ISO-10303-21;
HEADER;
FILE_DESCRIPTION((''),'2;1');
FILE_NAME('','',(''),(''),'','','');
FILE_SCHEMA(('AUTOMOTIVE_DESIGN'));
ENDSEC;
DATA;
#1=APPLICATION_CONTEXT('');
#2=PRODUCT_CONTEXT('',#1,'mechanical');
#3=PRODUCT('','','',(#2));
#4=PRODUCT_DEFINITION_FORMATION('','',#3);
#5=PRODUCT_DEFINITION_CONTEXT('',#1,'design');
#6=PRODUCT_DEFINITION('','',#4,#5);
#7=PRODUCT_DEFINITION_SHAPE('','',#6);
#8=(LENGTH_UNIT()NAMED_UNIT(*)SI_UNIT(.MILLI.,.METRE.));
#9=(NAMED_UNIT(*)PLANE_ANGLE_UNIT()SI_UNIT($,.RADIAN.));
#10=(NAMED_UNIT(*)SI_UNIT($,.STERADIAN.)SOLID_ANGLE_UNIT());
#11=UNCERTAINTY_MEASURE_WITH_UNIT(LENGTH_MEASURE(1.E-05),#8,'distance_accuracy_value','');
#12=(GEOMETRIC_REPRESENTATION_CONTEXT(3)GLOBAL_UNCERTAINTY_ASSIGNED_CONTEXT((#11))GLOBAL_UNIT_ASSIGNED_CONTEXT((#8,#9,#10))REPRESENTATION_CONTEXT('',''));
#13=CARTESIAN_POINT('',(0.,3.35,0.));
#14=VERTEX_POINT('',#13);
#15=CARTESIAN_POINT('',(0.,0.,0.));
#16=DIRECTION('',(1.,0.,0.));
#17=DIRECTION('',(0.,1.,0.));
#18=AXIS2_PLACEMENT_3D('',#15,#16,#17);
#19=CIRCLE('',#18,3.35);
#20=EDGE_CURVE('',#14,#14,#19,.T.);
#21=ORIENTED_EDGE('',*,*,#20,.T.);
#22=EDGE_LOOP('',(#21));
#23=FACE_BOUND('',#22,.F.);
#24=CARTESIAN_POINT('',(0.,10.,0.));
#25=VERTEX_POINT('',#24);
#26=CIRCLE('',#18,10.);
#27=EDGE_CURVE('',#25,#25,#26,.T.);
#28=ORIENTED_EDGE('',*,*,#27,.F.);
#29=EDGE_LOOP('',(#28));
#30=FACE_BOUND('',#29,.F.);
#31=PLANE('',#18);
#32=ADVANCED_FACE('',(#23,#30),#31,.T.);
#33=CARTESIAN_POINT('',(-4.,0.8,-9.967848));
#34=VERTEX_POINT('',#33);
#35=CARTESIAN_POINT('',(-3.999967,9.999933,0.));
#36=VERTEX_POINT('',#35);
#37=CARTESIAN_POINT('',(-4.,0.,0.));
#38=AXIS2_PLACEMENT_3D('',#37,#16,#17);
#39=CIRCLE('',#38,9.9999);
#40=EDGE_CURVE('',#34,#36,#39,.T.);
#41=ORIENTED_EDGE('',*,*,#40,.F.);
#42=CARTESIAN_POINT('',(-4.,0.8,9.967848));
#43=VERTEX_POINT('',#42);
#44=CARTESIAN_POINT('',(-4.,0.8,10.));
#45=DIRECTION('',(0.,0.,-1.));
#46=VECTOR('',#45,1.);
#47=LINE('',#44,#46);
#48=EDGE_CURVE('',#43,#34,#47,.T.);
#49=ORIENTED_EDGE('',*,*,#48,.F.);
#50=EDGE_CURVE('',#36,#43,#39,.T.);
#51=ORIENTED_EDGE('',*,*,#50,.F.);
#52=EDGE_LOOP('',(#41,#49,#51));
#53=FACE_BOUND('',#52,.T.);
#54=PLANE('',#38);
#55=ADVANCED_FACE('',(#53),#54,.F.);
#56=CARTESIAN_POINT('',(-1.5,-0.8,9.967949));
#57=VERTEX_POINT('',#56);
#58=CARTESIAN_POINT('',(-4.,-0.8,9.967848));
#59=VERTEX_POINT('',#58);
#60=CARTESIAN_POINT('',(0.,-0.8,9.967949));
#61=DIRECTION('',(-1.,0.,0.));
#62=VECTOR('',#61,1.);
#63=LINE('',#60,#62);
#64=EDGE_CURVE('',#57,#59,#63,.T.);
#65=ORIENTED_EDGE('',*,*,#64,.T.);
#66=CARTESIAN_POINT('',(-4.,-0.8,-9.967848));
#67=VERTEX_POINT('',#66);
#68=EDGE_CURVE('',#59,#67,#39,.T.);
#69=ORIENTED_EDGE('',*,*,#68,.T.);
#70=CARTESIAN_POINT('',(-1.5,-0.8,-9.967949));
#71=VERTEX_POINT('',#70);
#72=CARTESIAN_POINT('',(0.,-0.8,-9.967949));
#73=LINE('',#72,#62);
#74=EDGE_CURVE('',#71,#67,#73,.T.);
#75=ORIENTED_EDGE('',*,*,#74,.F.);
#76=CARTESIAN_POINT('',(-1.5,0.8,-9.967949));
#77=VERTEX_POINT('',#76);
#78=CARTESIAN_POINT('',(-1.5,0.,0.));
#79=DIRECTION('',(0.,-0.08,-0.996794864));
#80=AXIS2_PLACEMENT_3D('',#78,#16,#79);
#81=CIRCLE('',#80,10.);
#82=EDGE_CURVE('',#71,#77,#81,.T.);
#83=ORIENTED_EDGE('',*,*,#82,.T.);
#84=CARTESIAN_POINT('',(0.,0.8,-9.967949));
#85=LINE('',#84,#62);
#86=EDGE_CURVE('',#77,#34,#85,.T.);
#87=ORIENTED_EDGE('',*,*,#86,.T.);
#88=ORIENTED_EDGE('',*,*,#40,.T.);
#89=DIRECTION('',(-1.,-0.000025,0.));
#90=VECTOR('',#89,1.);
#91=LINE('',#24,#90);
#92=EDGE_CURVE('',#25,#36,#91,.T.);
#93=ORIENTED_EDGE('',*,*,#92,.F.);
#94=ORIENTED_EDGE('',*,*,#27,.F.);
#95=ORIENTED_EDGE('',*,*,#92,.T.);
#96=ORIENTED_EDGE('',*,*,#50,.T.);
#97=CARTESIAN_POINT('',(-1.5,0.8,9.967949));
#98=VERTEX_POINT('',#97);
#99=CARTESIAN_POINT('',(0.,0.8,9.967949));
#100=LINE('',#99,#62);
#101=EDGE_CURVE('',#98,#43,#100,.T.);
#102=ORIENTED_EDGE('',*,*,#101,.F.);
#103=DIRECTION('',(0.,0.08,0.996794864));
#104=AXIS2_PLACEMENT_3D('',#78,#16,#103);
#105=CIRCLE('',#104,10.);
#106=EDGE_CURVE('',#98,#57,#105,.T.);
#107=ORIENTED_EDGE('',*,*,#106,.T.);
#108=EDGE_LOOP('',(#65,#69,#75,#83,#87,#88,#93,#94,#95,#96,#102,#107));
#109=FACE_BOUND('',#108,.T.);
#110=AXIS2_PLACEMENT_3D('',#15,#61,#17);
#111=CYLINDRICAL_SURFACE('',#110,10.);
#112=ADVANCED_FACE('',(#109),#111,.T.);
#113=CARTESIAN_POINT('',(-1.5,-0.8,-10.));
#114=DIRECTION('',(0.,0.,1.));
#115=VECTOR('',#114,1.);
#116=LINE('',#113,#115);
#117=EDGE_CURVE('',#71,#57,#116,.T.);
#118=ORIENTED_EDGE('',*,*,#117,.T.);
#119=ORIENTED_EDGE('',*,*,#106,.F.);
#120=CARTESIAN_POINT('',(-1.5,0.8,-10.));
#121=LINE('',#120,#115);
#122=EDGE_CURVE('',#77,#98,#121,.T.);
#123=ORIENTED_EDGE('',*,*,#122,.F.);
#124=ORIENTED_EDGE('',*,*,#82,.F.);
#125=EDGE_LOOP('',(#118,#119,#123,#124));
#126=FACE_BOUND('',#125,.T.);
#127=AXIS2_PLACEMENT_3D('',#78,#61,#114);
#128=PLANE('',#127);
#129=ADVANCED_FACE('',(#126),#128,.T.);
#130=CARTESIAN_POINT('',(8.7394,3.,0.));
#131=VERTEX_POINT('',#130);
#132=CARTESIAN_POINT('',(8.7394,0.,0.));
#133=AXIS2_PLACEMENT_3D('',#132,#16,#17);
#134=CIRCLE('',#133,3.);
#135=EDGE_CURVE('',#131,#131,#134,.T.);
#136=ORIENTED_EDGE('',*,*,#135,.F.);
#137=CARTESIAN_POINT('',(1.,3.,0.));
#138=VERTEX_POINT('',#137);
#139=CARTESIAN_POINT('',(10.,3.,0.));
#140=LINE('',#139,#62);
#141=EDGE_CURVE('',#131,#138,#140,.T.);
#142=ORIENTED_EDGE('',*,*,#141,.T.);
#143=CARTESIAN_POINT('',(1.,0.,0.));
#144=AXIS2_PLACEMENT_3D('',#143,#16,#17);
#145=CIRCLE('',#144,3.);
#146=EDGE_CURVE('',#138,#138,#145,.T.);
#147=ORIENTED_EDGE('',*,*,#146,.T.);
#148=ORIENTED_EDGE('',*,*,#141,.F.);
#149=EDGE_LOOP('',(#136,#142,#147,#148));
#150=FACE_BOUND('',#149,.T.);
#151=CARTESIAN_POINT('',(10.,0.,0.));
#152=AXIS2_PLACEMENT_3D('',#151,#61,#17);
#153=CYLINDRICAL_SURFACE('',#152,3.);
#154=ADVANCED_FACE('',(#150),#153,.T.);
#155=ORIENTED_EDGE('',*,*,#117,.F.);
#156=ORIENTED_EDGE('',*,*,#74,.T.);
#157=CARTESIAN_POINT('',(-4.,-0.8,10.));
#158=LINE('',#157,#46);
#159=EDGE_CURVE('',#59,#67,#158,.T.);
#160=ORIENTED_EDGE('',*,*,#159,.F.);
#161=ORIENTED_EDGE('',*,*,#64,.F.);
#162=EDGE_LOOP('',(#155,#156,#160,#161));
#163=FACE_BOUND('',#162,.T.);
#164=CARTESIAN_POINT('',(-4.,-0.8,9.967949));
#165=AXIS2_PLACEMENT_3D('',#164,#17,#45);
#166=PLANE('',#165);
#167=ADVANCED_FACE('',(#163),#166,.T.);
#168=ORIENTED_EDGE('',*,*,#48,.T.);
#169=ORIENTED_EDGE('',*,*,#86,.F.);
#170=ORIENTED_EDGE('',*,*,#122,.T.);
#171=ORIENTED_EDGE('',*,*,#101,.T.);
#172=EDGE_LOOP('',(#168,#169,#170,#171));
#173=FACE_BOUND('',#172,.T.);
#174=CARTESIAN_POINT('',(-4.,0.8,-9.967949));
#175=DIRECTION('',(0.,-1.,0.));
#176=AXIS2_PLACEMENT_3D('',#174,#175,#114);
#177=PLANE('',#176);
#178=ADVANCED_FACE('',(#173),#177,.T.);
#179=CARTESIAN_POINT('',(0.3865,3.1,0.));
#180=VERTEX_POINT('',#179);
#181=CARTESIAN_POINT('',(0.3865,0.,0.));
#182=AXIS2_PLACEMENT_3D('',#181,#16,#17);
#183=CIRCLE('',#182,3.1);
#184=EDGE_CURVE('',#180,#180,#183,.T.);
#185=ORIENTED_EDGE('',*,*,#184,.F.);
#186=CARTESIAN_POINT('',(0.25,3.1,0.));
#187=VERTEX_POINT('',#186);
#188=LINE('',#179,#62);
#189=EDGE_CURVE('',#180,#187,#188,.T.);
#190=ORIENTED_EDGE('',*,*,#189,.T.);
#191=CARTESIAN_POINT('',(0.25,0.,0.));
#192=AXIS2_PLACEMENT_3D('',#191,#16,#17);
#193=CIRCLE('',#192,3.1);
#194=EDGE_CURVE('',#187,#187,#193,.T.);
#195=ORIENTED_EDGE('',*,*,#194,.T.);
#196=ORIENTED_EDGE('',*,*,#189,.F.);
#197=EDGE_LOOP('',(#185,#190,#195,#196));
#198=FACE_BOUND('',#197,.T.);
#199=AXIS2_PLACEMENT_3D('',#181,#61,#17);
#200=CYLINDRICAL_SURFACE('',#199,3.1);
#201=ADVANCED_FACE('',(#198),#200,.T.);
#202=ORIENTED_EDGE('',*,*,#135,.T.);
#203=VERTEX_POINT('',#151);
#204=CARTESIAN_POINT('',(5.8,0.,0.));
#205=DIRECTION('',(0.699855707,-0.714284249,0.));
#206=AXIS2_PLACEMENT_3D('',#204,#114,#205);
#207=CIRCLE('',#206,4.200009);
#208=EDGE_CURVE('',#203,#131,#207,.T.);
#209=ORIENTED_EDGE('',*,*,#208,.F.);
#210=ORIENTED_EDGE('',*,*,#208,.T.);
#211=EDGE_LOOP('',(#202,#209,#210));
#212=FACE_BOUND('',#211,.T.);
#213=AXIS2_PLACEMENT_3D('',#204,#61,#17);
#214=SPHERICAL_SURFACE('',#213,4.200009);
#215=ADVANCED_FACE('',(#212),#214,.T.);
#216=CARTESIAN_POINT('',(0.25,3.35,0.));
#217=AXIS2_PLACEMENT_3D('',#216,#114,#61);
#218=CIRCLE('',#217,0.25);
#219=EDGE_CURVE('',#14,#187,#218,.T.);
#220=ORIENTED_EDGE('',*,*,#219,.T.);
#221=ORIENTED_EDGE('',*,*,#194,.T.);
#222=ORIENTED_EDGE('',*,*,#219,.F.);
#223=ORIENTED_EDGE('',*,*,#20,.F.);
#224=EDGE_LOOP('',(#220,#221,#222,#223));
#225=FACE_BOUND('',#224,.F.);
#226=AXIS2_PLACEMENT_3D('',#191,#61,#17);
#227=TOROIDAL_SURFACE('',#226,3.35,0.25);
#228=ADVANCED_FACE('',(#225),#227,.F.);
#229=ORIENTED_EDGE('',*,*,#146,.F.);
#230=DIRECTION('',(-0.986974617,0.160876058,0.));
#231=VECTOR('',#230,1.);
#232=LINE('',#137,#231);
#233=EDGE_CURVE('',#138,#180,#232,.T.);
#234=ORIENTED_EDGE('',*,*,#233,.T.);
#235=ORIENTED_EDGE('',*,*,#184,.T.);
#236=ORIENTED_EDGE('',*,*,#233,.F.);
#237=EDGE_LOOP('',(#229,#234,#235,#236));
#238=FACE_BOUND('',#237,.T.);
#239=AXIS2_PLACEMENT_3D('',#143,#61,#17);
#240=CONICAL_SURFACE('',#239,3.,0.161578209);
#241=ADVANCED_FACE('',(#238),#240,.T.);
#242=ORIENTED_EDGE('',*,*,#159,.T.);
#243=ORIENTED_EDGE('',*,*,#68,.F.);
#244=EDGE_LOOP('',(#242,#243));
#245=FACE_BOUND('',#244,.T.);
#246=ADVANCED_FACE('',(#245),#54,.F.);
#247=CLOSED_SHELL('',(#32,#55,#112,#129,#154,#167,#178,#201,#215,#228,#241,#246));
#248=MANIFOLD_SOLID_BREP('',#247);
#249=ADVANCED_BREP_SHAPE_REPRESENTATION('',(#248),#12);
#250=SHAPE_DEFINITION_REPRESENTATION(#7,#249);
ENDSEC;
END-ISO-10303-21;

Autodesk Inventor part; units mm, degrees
ref_plane "YZ Plane" through (0, 0, 0) normal (1, 0, 0) x (0, 1, 0)
ref_plane "XZ Plane" through (0, 0, 0) normal (0, 1, 0) x (-1, 0, 0)
sketch "Sketch1" plane through (0, 0, 0) normal (0, 0, 1) x (1, 0, 0)
  line L0 (-4, 0) -> (10, 0)
  line L1 (10, 0) -> (10, 3)
  line L2 (10, 3) -> (1, 3)
  line L3 (1, 3) -> (0.3865, 3.1)
  line L4 (0.3865, 3.1) -> (0.25, 3.1)
  line L5 (0, 3.35) -> (0, 10)
  line L6 (-6.8, 0) -> (12.8, 0) projected
  line L7 (0, -2) -> (0, 12) projected
  line L8 (-4, 0) -> (-4, 9.9999)
  line L9 (0, 10) -> (-4, 9.9999)
  arc A0 (0, 3.35) -> (0.25, 3.1) centre (0.25, 3.35) ccw
  point P0 (0, 3.1)
  dimension "d0" = 10
  dimension "d1" = 9
  dimension "d2" = 0.6135
  dimension "d3" = 4
  dimension "d4" = 6
  dimension "d5" = 6.2
  dimension "d9" = 20
  dimension "d10" = 0.001
  dimension "d40" = 0.25
revolve "Body" add sketch "Sketch1" angle 360 about axis through (-4, 0, 0) along (1, 0, 0)
sketch "Sketch2" plane through (-4, 0, 0) normal (-1, 0, 0) x (0, 0, 1)
  circle A0 centre (0, 0) radius 10 projected
  line L0 (0, 0) -> (0, 9.9999) projected
  line L1 (-10, 0.8) -> (10, 0.8)
  line L2 (10, 0.8) -> (10, -0.8)
  line L3 (10, -0.8) -> (-10, -0.8)
  line L4 (-10, -0.8) -> (-10, 0.8)
  line L5 (-10, 0) -> (10, 0) construction
  line L6 (0, 0.8) -> (0, -0.8) construction
  dimension "d11" = 1.6
  dimension "d12" = 20
fillet "Fillet1" radius 0.0001 1 edges at (-4, -9.9999, 0)
extrude "Slot" cut sketch "Sketch2" against normal blind 2.5 contours A0 L3 L1 | L2 L3 A0 | A0 L1 L2 | L3 L4 A0 | A0 L4 L1
thread "Thread" size "M6x1" designation "M6" class "6g" standard "GB Metric profile" length 9
sketch "Sketch3" plane through (0, 0, 0) normal (0, 0, 1) x (1, 0, 0)
  line L0 (10, 0) -> (10, 3) projected
  line L1 (10, 3) -> (1, 3) projected
  line L2 (-4, 0) -> (10, 0) projected
  line L3 (10, -3) -> (10, 3) projected
  line L4 (1, -3) -> (10, -3) projected
  arc A0 (8.7394, -3) -> (8.7394, 3) centre (5.8, 0) ccw
  dimension "d41" = 8.4
revolve "Fillet2" cut sketch "Sketch3" angle 360 about axis through (-4, 0, 0) along (1, 0, 0) contours A0 L1 L0
ref_plane "Work Plane1" through (30.1625, 0, 0) normal (0, 0, -1) x (1, 0, 0)
equation "\"d11\" = SBR"
equation "\"d12\" = KOD"
equation "\"d13\" = RR"
equation "\"d16\" = STI"
equation "\"d14\" = GEL"
equation "\"d0\" = NLG"
equation "\"d1\" = GEL"
equation "\"d2\" = GAL"
equation "\"d3\" = KOH"
equation "\"d4\" = GD"
equation "\"d5\" = BDM"
equation "\"d9\" = KOD"
equation "\"d10\" = KEWI"
equation "\"d40\" = R"
equation "\"d41\" = RE"
equation "\"GD\" = NND"
equation "\"NLG\" = 10"
equation "\"GEL\" = 9"
equation "\"KOD\" = 20"
equation "\"KOH\" = 4"
equation "\"GAL\" = 0.61345 * PTC"
equation "\"BDM\" = 6.2"
equation "\"RR\" = 0.0001"
equation "\"SBR\" = 1.6"
equation "\"STI\" = 2.5"
equation "\"KEWI\" = 0.001deg"
equation "\"R\" = 0.25"
equation "\"RE\" = 8.4"
equation "\"GUL\" = 0.61345 * PTC"
equation "\"SPD\" = NND - 1.2269 * PTC"
equation "\"PTC\" = 1"
equation "\"THREADDIA\" = 6"
equation "\"TOA\" = 30deg"
equation "\"FAWI\" = 45"
equation "\"NND\" = 6"
equation "\"GD1\" = THREADDIA - 1.2269 * PTC"
properties part number "Screw GB 833 M6 x 10" material "Steel, Mild"
